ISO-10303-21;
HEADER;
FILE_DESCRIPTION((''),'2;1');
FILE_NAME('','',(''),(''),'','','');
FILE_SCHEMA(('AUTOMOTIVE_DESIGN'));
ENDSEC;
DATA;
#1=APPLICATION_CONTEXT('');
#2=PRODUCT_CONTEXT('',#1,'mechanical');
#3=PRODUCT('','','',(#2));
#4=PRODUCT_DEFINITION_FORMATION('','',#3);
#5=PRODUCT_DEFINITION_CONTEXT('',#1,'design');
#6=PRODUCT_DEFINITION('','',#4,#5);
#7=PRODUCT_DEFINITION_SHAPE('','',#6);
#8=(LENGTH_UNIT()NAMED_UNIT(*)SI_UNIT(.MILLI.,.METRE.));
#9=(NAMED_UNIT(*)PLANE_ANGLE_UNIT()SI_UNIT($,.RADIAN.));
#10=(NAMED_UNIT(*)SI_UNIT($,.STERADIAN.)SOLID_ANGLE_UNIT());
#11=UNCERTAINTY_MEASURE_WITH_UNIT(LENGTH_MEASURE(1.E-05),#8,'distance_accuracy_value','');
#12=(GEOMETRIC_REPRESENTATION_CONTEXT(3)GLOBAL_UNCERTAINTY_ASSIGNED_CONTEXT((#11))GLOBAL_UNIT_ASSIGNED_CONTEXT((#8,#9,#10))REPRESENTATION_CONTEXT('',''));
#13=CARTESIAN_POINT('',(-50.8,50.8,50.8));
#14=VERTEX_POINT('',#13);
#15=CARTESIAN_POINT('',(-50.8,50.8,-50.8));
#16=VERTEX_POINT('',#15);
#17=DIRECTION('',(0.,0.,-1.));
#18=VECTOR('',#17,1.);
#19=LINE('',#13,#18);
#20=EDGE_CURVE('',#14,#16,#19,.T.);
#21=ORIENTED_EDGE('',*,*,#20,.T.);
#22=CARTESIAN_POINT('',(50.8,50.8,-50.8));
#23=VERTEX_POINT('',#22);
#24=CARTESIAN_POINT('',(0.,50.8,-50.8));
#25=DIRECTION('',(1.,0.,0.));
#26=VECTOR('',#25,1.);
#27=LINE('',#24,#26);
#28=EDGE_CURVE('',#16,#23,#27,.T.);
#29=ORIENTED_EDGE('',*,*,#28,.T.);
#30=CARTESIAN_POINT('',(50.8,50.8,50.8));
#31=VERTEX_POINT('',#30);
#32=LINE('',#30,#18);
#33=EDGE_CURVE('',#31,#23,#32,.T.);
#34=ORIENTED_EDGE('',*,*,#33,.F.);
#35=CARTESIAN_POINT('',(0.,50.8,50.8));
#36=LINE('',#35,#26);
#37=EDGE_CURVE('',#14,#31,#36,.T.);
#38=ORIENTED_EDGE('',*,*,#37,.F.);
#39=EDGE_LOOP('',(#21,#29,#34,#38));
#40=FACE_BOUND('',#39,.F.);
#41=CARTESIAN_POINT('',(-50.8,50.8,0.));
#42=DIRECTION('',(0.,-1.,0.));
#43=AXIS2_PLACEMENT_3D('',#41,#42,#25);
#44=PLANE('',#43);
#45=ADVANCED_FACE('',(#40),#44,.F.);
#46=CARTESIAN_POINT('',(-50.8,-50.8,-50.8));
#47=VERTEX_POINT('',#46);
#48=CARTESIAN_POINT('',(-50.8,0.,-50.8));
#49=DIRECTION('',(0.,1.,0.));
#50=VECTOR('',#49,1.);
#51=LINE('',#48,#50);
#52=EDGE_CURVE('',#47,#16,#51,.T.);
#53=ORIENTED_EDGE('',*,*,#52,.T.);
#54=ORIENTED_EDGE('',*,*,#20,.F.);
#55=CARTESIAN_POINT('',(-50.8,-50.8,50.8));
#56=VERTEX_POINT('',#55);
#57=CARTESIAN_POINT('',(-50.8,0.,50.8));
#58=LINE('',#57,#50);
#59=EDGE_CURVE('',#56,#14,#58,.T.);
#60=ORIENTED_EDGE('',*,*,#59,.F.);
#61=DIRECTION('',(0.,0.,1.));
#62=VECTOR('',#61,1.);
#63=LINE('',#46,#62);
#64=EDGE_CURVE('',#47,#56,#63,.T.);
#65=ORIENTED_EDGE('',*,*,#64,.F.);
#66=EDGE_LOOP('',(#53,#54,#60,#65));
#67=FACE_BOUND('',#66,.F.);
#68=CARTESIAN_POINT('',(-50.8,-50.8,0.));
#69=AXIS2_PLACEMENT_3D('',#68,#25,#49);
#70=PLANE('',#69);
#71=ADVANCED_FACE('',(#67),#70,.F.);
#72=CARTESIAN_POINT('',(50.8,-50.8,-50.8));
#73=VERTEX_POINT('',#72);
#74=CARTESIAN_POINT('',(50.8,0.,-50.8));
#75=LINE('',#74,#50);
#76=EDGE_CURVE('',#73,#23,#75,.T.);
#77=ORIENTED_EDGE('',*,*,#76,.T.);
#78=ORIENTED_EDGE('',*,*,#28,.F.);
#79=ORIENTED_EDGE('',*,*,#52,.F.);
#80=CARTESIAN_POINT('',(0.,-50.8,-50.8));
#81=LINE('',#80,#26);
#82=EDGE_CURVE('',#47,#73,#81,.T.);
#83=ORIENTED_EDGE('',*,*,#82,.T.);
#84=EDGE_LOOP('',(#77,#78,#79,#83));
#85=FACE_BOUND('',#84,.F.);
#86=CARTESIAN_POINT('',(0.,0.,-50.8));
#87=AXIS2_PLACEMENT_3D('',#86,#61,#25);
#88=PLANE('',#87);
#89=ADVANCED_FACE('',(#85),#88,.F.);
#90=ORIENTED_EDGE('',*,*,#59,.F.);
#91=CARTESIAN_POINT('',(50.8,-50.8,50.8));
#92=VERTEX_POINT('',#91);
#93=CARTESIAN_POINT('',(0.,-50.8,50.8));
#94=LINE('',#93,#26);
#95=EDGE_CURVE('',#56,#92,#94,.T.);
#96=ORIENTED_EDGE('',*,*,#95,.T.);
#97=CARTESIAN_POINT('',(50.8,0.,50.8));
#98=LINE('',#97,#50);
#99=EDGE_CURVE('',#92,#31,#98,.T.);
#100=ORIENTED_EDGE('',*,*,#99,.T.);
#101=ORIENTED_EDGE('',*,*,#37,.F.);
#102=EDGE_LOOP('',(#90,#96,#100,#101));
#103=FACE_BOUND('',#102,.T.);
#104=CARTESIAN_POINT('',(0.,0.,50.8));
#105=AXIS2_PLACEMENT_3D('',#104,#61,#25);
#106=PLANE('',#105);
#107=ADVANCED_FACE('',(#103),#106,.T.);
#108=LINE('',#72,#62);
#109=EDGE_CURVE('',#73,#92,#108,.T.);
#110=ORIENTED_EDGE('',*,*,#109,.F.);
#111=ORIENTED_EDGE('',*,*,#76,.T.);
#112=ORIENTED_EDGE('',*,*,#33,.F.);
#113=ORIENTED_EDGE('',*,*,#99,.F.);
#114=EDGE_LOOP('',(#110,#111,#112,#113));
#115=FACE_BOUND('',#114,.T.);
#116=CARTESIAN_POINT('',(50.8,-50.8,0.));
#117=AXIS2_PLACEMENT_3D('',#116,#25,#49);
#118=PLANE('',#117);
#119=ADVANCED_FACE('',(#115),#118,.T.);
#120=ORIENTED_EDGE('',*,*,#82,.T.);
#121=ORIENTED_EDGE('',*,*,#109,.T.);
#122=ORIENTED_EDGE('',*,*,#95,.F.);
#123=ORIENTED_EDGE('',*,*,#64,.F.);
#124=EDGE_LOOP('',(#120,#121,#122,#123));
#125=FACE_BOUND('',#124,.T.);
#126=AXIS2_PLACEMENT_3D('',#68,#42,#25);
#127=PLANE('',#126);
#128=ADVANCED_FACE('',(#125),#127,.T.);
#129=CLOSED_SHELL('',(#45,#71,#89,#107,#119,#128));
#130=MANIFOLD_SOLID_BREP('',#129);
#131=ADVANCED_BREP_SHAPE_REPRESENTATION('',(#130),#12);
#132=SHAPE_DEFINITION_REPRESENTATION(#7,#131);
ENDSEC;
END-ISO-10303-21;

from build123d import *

# Parameters (mm, degrees)
F1_W     = 101.6
F1_H     = 101.6
F2_DEPTH = 50.8


# Not quite as in the source:
# - a variable given as a bare number and used for a length is read in inches; the dataset says mm whatever the document's units were


with BuildPart() as f2:
    # F1 (on Top) → F2 (new body, symmetric)
    with BuildSketch(Plane.XY):
        Rectangle(F1_W, F1_H)
    extrude(amount=F2_DEPTH, both=True)


solid = f2.part
